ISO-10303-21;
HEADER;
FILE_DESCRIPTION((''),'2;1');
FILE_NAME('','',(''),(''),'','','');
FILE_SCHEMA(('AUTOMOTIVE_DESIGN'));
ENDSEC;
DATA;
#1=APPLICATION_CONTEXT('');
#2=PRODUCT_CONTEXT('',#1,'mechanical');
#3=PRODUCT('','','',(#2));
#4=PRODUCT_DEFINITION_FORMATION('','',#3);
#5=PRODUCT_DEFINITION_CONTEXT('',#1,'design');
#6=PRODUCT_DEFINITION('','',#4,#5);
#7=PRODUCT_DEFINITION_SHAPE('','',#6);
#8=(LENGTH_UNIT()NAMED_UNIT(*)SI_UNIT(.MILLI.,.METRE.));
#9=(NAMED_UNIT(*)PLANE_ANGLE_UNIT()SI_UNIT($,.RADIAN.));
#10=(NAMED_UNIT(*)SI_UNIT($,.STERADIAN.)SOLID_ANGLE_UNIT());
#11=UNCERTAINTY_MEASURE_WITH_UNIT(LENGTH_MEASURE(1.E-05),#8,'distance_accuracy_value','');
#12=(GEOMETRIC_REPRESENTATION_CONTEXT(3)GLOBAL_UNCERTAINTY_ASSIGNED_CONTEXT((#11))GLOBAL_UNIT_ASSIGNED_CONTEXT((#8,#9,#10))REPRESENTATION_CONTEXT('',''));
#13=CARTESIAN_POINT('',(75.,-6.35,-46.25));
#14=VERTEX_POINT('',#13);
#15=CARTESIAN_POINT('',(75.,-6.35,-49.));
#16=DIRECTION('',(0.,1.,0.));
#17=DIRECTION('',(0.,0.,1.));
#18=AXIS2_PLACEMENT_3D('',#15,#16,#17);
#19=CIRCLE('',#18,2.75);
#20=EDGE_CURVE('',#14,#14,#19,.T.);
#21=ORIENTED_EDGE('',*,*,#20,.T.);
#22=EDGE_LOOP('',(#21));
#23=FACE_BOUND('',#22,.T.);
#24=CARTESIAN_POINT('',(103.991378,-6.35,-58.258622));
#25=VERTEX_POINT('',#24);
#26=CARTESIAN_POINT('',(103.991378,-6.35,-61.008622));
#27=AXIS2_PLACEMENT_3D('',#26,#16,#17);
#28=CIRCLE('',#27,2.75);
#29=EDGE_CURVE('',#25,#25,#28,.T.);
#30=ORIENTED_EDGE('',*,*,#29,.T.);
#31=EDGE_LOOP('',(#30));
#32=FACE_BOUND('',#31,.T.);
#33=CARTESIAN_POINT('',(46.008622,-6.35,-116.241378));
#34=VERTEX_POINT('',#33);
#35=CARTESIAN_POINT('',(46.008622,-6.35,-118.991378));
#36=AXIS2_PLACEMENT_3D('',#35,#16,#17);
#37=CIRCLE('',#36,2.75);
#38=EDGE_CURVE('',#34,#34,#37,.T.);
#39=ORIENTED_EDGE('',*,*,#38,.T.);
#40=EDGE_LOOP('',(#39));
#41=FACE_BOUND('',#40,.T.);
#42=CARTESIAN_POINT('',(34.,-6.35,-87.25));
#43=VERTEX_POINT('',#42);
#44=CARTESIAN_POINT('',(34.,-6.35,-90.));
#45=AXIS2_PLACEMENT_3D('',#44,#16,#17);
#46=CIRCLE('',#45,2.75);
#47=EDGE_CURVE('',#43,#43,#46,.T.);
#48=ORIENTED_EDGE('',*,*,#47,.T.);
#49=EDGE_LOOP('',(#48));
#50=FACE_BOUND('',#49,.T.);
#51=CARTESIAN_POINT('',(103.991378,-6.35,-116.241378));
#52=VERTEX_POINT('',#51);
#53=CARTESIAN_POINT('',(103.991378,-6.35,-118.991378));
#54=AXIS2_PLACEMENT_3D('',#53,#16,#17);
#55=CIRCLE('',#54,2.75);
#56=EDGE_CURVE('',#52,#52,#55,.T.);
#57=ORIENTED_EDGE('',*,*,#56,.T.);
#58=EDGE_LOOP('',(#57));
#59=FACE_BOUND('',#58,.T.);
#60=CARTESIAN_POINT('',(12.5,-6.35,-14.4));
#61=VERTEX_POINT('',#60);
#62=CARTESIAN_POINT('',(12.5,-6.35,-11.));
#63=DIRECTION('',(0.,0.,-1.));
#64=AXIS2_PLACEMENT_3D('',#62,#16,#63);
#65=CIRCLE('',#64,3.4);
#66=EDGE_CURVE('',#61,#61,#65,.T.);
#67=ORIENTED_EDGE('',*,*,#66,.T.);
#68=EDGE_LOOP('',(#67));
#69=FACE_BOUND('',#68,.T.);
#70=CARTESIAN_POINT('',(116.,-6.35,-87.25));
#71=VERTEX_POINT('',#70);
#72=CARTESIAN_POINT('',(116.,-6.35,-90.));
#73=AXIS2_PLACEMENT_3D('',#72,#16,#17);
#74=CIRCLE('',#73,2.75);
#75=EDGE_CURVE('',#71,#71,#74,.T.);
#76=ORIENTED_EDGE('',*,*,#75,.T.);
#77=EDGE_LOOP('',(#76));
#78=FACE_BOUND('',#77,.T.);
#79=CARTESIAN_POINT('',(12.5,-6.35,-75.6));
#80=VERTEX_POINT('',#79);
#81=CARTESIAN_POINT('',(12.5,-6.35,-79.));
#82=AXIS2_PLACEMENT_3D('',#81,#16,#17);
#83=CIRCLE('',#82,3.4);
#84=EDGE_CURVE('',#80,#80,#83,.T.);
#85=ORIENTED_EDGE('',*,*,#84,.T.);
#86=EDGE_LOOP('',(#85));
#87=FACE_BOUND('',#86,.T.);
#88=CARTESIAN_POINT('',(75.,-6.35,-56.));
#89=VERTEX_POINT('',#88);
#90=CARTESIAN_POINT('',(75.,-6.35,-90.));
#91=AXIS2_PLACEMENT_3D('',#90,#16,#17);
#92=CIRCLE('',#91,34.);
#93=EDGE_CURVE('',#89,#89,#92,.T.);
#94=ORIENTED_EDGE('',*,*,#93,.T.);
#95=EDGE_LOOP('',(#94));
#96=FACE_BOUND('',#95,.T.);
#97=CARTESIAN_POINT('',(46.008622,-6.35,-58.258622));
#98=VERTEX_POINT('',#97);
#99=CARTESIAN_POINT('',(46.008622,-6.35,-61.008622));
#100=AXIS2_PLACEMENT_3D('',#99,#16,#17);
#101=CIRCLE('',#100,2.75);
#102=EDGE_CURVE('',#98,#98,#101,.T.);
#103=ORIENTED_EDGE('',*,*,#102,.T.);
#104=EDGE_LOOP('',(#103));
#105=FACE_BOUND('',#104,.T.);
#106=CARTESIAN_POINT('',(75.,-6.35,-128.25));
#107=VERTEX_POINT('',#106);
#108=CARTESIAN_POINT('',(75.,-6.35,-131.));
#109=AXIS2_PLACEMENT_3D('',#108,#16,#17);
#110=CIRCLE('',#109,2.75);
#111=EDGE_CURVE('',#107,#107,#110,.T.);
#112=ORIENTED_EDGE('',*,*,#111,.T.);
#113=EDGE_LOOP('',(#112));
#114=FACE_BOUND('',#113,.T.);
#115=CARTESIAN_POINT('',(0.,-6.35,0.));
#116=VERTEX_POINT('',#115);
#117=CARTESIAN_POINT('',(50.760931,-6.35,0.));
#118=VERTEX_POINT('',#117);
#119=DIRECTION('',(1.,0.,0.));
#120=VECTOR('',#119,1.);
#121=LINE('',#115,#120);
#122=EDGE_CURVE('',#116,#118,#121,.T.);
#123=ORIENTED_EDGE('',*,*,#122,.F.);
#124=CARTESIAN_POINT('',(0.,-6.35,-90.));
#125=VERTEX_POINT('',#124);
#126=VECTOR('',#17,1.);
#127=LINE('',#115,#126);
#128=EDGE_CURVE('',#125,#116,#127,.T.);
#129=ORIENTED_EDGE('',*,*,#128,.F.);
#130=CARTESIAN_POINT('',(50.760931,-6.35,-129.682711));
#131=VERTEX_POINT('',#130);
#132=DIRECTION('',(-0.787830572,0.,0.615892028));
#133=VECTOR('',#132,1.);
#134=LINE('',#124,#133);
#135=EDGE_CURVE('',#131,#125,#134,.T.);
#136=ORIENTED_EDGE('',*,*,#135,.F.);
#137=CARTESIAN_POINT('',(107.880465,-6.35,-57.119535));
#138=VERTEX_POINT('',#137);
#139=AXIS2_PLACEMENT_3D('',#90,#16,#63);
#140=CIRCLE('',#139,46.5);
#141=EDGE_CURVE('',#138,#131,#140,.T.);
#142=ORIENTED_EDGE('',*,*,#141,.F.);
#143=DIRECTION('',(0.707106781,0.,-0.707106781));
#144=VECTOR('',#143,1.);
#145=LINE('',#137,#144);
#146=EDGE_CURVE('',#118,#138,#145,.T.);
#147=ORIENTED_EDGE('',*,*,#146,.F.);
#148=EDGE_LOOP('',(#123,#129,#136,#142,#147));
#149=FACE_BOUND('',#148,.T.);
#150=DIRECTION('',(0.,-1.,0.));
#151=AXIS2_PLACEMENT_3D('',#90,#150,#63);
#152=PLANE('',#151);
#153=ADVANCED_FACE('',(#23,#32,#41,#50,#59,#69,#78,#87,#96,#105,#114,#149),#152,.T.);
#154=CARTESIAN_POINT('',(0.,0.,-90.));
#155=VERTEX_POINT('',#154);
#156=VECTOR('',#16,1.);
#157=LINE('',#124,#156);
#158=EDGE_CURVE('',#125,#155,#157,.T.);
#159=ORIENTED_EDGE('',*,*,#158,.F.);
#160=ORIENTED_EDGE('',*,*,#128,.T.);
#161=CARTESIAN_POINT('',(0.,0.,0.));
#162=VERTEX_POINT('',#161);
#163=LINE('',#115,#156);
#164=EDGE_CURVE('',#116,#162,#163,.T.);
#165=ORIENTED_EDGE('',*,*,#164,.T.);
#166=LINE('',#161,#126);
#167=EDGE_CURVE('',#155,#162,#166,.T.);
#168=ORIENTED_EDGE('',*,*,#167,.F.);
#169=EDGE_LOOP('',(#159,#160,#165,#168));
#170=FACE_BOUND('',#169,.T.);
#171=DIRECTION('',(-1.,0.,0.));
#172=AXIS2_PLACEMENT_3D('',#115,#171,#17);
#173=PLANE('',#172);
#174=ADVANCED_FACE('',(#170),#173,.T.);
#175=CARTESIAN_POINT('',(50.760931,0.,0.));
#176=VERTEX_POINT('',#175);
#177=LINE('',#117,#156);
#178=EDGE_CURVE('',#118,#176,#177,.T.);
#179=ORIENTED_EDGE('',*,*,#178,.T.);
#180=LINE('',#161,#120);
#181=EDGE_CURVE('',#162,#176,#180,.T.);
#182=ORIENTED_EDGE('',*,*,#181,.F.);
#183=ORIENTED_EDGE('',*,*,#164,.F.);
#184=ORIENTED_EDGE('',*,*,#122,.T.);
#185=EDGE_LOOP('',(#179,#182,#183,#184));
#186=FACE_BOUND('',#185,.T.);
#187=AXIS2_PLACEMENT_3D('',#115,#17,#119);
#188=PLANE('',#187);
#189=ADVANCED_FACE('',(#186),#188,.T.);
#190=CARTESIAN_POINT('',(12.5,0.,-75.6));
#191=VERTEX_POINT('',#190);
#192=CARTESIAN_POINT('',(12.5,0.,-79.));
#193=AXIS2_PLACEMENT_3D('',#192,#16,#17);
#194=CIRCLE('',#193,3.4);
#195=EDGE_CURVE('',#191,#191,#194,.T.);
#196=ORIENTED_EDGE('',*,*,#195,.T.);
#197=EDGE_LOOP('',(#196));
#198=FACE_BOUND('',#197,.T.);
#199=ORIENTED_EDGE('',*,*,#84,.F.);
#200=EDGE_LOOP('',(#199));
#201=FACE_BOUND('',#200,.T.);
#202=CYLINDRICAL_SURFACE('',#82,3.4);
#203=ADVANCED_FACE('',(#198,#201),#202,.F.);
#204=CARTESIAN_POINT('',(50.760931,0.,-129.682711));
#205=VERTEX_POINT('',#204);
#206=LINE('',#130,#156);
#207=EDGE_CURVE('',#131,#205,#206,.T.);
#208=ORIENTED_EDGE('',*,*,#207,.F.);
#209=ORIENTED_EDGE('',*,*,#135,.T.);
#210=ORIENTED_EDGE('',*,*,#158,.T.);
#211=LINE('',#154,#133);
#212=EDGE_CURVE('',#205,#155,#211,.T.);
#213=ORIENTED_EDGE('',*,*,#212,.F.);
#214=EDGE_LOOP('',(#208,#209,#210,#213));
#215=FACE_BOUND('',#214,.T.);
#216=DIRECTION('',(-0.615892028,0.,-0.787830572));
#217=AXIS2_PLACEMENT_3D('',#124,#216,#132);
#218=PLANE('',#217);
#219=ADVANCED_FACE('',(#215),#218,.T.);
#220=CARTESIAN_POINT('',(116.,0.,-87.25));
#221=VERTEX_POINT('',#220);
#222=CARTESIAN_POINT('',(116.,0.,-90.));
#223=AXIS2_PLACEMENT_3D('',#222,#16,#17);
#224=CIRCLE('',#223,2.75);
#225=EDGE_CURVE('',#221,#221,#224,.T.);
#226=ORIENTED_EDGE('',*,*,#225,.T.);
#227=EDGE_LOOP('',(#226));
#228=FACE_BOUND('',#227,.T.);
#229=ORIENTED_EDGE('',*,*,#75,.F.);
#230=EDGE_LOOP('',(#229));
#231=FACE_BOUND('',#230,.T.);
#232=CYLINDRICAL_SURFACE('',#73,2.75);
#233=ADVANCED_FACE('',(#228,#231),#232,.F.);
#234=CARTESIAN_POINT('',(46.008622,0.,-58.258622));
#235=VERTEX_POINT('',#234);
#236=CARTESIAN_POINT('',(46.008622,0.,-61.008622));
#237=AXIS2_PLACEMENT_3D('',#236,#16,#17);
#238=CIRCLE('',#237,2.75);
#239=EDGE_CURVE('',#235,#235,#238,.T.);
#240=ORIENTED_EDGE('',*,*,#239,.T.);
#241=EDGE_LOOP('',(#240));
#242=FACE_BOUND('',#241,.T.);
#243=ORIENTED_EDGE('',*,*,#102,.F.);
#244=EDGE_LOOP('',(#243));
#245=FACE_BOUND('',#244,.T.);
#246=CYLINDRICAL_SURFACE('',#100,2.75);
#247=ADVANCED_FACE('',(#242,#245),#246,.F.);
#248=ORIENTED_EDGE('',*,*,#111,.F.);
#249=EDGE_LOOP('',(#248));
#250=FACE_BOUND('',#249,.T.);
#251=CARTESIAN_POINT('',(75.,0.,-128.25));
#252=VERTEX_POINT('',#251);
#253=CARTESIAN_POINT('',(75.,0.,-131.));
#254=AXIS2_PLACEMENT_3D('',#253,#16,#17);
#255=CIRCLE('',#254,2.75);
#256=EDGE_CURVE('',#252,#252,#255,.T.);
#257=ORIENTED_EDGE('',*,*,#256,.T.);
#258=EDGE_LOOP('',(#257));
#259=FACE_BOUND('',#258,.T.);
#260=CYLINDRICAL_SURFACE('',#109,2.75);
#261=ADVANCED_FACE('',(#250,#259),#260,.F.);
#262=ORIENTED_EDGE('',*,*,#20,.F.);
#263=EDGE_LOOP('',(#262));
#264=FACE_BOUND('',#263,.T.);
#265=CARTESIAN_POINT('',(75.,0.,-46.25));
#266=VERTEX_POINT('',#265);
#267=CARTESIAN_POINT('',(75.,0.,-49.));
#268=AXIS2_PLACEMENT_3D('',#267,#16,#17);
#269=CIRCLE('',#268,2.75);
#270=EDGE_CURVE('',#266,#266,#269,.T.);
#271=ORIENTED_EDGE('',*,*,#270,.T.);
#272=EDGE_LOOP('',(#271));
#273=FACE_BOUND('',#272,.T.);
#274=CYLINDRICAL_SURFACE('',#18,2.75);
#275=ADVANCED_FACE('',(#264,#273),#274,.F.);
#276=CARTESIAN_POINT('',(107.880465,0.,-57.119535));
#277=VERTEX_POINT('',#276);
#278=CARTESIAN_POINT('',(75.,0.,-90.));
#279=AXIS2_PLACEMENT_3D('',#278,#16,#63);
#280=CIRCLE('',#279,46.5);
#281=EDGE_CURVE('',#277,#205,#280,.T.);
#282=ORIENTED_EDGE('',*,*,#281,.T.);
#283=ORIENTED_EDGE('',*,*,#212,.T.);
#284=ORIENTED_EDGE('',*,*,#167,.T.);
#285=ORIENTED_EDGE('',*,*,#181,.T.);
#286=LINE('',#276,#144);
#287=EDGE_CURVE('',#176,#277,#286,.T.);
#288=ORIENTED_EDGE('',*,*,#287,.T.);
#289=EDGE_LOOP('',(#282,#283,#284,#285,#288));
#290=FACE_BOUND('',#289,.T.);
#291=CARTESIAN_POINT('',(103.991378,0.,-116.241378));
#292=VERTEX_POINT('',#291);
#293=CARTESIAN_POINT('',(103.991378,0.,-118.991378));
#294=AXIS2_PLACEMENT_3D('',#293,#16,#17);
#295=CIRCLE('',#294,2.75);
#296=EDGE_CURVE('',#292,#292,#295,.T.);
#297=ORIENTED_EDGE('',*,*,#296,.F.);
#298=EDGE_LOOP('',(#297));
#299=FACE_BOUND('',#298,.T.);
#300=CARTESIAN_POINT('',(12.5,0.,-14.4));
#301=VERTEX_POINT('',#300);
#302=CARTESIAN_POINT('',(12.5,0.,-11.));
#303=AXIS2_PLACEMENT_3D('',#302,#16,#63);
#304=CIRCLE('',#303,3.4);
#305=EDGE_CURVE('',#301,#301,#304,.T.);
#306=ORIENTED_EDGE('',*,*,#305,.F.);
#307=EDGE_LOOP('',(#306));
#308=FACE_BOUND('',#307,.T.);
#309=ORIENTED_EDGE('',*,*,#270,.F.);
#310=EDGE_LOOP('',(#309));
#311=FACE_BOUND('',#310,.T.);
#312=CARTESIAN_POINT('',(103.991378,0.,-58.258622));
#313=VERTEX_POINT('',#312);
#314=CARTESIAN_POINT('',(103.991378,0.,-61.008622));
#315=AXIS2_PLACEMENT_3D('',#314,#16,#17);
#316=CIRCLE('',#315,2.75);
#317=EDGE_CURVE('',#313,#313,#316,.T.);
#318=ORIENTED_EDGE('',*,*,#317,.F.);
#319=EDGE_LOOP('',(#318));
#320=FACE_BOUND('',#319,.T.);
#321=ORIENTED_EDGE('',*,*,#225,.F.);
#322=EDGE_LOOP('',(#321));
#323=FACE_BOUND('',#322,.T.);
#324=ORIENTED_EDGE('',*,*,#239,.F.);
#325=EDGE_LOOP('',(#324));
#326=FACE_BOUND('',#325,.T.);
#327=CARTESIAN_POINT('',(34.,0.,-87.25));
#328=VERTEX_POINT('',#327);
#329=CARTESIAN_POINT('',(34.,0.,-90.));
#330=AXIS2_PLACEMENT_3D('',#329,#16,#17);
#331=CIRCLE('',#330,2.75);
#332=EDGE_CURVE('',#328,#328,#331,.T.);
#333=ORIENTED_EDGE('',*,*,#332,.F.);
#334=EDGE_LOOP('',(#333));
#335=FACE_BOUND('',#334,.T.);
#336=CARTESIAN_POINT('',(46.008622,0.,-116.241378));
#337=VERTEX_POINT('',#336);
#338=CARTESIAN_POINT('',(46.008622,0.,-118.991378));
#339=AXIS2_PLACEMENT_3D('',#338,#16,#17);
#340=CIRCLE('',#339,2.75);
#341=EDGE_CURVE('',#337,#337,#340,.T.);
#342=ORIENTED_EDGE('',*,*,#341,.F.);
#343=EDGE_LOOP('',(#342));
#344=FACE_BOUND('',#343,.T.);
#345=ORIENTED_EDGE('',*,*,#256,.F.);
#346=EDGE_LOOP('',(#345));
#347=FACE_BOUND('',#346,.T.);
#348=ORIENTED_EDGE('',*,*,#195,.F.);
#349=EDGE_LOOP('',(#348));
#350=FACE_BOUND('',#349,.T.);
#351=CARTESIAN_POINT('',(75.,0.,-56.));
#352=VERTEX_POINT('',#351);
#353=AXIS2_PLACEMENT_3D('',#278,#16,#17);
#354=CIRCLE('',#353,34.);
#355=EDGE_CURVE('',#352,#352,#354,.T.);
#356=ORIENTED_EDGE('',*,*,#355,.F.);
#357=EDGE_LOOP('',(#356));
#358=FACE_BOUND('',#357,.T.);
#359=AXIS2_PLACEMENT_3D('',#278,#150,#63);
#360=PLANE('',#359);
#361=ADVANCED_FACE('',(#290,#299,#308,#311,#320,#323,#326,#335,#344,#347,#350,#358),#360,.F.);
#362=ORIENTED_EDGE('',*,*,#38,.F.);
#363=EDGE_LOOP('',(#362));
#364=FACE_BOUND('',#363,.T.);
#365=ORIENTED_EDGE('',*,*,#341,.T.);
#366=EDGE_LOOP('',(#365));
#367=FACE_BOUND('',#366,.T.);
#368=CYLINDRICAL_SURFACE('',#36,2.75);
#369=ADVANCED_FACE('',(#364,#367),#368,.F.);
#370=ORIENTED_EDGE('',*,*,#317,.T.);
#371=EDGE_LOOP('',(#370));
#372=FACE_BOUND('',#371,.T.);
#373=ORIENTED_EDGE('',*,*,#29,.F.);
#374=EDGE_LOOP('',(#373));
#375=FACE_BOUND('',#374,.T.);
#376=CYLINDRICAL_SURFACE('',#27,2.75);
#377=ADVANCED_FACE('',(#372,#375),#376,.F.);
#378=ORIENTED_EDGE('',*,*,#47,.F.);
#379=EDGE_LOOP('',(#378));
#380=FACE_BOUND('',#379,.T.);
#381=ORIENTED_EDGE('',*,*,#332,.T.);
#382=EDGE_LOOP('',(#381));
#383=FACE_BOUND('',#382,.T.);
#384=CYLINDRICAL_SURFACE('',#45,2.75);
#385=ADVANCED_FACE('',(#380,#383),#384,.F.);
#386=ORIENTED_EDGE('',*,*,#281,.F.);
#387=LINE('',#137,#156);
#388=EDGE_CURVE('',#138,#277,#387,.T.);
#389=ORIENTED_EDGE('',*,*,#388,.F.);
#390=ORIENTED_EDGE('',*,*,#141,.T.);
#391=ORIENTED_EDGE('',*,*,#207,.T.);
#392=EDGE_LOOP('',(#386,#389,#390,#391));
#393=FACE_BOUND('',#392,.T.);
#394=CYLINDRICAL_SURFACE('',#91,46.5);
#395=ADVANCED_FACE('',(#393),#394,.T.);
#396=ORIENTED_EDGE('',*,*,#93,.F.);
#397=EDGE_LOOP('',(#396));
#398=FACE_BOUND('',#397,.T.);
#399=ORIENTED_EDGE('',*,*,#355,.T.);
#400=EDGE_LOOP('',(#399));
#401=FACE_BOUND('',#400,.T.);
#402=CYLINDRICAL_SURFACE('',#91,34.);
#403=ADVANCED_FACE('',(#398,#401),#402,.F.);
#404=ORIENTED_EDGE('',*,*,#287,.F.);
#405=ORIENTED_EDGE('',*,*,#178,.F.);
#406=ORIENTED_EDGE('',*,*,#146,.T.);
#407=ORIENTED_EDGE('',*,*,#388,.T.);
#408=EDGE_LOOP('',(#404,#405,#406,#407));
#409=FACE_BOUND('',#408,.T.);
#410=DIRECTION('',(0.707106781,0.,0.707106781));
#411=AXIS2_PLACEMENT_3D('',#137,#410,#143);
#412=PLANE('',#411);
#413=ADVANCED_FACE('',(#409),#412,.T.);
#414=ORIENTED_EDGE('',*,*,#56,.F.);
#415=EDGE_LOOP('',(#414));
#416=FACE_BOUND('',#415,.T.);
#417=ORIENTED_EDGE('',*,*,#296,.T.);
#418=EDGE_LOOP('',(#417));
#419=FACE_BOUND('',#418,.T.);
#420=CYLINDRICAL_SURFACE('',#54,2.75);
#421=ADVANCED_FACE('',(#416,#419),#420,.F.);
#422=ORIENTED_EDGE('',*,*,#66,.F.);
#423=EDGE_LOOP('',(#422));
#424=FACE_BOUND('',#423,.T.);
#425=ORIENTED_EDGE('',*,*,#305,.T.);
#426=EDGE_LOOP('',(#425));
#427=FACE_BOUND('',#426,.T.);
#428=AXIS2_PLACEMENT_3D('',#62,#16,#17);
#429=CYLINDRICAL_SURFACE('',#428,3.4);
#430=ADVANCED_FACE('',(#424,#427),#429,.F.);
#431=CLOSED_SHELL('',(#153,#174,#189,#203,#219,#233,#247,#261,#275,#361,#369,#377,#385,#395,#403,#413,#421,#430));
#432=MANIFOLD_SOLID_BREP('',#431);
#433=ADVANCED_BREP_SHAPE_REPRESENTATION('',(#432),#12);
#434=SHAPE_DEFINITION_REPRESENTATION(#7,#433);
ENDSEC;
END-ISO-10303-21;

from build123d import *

# Parameters (mm, degrees)
BASE_FLANGE1_DEPTH = 6.35
SKETCH8_R          = 3.4
CUT_EXTRUDE1_DEPTH = 183.851914127
SKETCH9_R          = 34
CUT_EXTRUDE2_DEPTH = 183.851914127
SKETCH10_R         = 2.75
CUT_EXTRUDE3_DEPTH = 183.851914127


# Sheet-metal steps are written as plain solids
with BuildPart() as part:
    # Sketch2 → Base-Flange1 (new body)
    with BuildSketch(Plane(origin=(0, 0, 0), x_dir=(1, 0, 0), z_dir=(0, 1, 0))):
        with BuildLine():
            Line((0, 0), (50.76093065, 0))
            Line((50.76093065, 0), (107.880465325, 57.119534675))
            ThreePointArc((107.880465325, 57.119534675), (111.537953618, 118.761570635), (50.76093065, 129.682710556))
            Line((50.76093065, 129.682710556), (0, 90))
            Line((0, 90), (0, 0))
        make_face()
    extrude(amount=-BASE_FLANGE1_DEPTH)

    # Sketch8 → Cut-Extrude1 (cut, through all)
    with BuildSketch(Plane(origin=(0, 0, 0), x_dir=(1, 0, 0), z_dir=(0, 1, 0))):
        with Locations(Location((12.5, 79, 0), (0, 0, 270))):
            Circle(SKETCH8_R)
        with Locations(Location((12.5, 11, 0), (0, 0, 90))):
            Circle(SKETCH8_R)
    extrude(amount=-CUT_EXTRUDE1_DEPTH, mode=Mode.SUBTRACT)

    # Sketch9 → Cut-Extrude2 (cut, through all)
    with BuildSketch(Plane(origin=(0, 0, 0), x_dir=(1, 0, 0), z_dir=(0, 1, 0))):
        with Locations(Location((75, 90, 0), (0, 0, 270))):
            Circle(SKETCH9_R)
    extrude(amount=-CUT_EXTRUDE2_DEPTH, mode=Mode.SUBTRACT)

    # Sketch10 → Cut-Extrude3 (cut, through all)
    with BuildSketch(Plane(origin=(0, 0, 0), x_dir=(1, 0, 0), z_dir=(0, 1, 0))):
        with Locations(Location((75, 131, 0), (0, 0, 270))):
            Circle(SKETCH10_R)
        with Locations(Location((103.991378029, 118.991378029, 0), (0, 0, 270))):
            Circle(SKETCH10_R)
        with Locations(Location((116, 90, 0), (0, 0, 270))):
            Circle(SKETCH10_R)
        with Locations(Location((103.991378029, 61.008621971, 0), (0, 0, 270))):
            Circle(SKETCH10_R)
        with Locations(Location((75, 49, 0), (0, 0, 270))):
            Circle(SKETCH10_R)
        with Locations(Location((46.008621971, 61.008621971, 0), (0, 0, 270))):
            Circle(SKETCH10_R)
        with Locations(Location((34, 90, 0), (0, 0, 270))):
            Circle(SKETCH10_R)
        with Locations(Location((46.008621971, 118.991378029, 0), (0, 0, 270))):
            Circle(SKETCH10_R)
    extrude(amount=-CUT_EXTRUDE3_DEPTH, mode=Mode.SUBTRACT)


solid = part.part
